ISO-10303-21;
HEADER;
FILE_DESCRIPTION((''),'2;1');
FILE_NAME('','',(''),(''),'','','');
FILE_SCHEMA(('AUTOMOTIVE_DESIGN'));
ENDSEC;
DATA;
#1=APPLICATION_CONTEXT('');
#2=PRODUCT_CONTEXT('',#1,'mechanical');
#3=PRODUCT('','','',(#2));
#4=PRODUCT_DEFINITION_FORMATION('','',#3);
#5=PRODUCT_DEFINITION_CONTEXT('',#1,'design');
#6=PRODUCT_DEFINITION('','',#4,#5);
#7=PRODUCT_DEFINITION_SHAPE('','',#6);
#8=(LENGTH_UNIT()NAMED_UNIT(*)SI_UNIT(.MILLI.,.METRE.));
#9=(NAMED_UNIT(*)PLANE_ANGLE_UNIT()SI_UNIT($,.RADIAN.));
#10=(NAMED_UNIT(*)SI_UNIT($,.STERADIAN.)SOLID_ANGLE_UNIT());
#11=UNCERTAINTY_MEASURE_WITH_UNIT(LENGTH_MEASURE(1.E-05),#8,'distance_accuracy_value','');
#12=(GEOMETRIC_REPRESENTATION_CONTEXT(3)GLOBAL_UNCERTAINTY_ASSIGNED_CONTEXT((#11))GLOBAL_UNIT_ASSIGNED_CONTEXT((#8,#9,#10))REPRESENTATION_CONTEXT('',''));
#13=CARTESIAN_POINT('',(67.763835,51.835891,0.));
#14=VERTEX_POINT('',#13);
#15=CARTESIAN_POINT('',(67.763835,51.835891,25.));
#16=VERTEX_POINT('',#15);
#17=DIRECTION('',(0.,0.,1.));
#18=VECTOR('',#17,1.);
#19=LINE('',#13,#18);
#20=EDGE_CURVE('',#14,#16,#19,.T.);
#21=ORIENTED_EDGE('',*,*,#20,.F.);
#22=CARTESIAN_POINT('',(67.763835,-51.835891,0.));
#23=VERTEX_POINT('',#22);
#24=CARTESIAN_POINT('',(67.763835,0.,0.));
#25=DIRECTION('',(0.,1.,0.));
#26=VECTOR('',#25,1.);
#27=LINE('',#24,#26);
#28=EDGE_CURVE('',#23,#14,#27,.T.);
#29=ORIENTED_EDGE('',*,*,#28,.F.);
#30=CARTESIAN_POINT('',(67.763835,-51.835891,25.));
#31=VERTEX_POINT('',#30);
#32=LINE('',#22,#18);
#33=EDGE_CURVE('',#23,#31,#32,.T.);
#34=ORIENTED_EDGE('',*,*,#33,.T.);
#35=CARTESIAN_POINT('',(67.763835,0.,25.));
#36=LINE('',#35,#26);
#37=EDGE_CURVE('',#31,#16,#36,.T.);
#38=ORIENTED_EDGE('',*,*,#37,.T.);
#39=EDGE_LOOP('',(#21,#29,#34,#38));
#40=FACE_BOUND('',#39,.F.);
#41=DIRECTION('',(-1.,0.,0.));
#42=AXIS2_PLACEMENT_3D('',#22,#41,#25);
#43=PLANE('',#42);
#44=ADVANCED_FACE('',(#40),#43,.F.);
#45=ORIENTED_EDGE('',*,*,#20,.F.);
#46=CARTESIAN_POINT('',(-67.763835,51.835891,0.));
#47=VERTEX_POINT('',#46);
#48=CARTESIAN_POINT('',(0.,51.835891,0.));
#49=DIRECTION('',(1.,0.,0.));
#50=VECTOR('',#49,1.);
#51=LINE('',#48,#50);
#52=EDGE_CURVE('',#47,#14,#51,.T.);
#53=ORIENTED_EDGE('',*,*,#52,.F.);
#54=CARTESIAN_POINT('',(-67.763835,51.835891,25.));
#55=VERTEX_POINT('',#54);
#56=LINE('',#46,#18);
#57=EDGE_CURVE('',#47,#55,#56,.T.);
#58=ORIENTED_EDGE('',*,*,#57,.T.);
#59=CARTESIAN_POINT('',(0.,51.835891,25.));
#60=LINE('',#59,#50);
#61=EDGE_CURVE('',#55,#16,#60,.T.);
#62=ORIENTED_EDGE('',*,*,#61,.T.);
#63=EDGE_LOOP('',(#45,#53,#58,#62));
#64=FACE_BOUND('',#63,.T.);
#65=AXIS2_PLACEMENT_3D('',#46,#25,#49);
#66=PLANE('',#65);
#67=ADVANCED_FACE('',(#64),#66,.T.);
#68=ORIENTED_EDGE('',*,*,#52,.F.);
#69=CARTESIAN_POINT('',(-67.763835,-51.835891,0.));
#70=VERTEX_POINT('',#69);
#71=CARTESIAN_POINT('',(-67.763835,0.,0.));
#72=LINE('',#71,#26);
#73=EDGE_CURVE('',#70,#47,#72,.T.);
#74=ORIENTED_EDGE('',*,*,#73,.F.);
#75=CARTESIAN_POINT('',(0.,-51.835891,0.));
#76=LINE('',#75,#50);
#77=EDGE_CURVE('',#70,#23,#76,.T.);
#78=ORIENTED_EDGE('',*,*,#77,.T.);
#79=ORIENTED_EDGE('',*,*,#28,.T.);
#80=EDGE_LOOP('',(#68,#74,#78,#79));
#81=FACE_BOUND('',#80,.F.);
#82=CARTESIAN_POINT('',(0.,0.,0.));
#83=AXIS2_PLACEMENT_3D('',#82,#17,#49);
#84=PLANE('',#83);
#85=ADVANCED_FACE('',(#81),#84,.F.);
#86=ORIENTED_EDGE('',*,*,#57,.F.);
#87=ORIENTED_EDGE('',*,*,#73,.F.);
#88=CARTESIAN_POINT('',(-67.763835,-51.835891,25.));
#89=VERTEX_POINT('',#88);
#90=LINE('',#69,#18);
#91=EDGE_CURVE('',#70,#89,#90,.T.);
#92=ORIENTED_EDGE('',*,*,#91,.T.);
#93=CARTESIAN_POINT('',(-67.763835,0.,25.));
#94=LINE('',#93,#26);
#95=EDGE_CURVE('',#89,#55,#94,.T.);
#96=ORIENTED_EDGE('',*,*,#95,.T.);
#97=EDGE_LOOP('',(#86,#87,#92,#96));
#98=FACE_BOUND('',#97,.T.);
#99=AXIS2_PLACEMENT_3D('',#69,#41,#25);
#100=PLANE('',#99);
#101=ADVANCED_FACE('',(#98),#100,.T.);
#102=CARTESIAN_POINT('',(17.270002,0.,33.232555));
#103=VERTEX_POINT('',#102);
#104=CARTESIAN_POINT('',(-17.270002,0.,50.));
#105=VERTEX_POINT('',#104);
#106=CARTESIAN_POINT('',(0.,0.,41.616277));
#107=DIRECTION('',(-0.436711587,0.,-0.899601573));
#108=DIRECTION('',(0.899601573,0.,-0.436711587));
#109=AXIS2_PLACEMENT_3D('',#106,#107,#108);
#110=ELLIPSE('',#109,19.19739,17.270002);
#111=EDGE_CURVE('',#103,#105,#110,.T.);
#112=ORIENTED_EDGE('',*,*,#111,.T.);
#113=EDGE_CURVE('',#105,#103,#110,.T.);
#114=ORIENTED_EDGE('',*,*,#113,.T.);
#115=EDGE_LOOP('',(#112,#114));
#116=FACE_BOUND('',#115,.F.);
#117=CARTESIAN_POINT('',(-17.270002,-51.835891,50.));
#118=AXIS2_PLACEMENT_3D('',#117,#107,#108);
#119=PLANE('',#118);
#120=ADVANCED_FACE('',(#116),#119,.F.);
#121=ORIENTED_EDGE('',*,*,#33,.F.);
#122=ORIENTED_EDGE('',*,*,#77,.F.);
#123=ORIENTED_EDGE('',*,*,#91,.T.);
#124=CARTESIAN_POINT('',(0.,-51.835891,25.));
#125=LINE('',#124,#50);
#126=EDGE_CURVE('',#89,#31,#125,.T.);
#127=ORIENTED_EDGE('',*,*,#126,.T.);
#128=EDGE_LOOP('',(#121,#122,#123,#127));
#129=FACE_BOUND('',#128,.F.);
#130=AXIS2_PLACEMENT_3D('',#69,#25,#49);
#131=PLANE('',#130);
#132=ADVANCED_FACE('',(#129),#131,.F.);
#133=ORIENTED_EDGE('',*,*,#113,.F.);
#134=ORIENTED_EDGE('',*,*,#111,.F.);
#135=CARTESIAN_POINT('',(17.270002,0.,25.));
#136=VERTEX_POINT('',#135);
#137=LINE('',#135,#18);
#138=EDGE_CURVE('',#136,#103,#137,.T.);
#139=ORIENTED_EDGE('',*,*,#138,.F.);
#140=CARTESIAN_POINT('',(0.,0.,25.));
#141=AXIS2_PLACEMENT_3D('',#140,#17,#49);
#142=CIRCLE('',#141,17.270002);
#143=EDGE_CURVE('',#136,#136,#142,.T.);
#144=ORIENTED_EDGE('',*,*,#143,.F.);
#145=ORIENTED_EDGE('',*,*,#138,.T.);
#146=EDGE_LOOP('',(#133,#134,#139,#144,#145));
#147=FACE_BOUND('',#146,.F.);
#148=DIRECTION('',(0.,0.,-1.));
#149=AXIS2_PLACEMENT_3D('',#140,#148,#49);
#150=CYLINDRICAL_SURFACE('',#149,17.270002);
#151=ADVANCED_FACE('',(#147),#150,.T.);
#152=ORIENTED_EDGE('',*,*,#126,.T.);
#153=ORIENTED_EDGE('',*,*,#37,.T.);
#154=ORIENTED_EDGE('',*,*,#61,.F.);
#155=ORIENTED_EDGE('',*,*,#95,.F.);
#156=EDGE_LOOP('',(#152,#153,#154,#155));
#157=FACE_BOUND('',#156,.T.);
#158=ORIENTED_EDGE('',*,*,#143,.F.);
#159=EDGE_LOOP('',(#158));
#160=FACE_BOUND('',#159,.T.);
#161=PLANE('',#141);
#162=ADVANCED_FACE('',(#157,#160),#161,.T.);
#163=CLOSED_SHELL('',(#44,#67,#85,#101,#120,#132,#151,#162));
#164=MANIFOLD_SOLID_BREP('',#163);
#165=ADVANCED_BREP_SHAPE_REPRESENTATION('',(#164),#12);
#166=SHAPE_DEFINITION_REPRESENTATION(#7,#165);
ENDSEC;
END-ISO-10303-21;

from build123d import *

# Parameters (mm, degrees)
F0_W     = 135.5276703835
F0_H     = 103.6717817187
F1_DEPTH = 25
F2_R     = 17.2700021185
F3_DEPTH = 25
F5_DEPTH = 103.6727817187


# Not quite as in the source:
# - a feature names something its author has since deleted; it is built from what else it names


with BuildPart() as f1:
    # F0 (on Top) → F1 (new body)
    with BuildSketch(Plane.XY):
        Rectangle(F0_W, F0_H)
    extrude(amount=F1_DEPTH)

    # F2 (on face) → F3 (join)
    with BuildSketch(Plane.XY.offset(25)):
        Circle(F2_R)
    extrude(amount=F3_DEPTH)

    # F4 (on face) → F5 (cut, through all)
    with BuildSketch(Plane.XZ.offset(51.8358908594)):
        Polygon((23.7591248006, 58.1170134246), (-17.2700021185, 50), (17.2700021185, 33.2325548289), (23.7591248006, 30.0824102014), align=None)
    extrude(amount=-F5_DEPTH, mode=Mode.SUBTRACT)


solid = f1.part
